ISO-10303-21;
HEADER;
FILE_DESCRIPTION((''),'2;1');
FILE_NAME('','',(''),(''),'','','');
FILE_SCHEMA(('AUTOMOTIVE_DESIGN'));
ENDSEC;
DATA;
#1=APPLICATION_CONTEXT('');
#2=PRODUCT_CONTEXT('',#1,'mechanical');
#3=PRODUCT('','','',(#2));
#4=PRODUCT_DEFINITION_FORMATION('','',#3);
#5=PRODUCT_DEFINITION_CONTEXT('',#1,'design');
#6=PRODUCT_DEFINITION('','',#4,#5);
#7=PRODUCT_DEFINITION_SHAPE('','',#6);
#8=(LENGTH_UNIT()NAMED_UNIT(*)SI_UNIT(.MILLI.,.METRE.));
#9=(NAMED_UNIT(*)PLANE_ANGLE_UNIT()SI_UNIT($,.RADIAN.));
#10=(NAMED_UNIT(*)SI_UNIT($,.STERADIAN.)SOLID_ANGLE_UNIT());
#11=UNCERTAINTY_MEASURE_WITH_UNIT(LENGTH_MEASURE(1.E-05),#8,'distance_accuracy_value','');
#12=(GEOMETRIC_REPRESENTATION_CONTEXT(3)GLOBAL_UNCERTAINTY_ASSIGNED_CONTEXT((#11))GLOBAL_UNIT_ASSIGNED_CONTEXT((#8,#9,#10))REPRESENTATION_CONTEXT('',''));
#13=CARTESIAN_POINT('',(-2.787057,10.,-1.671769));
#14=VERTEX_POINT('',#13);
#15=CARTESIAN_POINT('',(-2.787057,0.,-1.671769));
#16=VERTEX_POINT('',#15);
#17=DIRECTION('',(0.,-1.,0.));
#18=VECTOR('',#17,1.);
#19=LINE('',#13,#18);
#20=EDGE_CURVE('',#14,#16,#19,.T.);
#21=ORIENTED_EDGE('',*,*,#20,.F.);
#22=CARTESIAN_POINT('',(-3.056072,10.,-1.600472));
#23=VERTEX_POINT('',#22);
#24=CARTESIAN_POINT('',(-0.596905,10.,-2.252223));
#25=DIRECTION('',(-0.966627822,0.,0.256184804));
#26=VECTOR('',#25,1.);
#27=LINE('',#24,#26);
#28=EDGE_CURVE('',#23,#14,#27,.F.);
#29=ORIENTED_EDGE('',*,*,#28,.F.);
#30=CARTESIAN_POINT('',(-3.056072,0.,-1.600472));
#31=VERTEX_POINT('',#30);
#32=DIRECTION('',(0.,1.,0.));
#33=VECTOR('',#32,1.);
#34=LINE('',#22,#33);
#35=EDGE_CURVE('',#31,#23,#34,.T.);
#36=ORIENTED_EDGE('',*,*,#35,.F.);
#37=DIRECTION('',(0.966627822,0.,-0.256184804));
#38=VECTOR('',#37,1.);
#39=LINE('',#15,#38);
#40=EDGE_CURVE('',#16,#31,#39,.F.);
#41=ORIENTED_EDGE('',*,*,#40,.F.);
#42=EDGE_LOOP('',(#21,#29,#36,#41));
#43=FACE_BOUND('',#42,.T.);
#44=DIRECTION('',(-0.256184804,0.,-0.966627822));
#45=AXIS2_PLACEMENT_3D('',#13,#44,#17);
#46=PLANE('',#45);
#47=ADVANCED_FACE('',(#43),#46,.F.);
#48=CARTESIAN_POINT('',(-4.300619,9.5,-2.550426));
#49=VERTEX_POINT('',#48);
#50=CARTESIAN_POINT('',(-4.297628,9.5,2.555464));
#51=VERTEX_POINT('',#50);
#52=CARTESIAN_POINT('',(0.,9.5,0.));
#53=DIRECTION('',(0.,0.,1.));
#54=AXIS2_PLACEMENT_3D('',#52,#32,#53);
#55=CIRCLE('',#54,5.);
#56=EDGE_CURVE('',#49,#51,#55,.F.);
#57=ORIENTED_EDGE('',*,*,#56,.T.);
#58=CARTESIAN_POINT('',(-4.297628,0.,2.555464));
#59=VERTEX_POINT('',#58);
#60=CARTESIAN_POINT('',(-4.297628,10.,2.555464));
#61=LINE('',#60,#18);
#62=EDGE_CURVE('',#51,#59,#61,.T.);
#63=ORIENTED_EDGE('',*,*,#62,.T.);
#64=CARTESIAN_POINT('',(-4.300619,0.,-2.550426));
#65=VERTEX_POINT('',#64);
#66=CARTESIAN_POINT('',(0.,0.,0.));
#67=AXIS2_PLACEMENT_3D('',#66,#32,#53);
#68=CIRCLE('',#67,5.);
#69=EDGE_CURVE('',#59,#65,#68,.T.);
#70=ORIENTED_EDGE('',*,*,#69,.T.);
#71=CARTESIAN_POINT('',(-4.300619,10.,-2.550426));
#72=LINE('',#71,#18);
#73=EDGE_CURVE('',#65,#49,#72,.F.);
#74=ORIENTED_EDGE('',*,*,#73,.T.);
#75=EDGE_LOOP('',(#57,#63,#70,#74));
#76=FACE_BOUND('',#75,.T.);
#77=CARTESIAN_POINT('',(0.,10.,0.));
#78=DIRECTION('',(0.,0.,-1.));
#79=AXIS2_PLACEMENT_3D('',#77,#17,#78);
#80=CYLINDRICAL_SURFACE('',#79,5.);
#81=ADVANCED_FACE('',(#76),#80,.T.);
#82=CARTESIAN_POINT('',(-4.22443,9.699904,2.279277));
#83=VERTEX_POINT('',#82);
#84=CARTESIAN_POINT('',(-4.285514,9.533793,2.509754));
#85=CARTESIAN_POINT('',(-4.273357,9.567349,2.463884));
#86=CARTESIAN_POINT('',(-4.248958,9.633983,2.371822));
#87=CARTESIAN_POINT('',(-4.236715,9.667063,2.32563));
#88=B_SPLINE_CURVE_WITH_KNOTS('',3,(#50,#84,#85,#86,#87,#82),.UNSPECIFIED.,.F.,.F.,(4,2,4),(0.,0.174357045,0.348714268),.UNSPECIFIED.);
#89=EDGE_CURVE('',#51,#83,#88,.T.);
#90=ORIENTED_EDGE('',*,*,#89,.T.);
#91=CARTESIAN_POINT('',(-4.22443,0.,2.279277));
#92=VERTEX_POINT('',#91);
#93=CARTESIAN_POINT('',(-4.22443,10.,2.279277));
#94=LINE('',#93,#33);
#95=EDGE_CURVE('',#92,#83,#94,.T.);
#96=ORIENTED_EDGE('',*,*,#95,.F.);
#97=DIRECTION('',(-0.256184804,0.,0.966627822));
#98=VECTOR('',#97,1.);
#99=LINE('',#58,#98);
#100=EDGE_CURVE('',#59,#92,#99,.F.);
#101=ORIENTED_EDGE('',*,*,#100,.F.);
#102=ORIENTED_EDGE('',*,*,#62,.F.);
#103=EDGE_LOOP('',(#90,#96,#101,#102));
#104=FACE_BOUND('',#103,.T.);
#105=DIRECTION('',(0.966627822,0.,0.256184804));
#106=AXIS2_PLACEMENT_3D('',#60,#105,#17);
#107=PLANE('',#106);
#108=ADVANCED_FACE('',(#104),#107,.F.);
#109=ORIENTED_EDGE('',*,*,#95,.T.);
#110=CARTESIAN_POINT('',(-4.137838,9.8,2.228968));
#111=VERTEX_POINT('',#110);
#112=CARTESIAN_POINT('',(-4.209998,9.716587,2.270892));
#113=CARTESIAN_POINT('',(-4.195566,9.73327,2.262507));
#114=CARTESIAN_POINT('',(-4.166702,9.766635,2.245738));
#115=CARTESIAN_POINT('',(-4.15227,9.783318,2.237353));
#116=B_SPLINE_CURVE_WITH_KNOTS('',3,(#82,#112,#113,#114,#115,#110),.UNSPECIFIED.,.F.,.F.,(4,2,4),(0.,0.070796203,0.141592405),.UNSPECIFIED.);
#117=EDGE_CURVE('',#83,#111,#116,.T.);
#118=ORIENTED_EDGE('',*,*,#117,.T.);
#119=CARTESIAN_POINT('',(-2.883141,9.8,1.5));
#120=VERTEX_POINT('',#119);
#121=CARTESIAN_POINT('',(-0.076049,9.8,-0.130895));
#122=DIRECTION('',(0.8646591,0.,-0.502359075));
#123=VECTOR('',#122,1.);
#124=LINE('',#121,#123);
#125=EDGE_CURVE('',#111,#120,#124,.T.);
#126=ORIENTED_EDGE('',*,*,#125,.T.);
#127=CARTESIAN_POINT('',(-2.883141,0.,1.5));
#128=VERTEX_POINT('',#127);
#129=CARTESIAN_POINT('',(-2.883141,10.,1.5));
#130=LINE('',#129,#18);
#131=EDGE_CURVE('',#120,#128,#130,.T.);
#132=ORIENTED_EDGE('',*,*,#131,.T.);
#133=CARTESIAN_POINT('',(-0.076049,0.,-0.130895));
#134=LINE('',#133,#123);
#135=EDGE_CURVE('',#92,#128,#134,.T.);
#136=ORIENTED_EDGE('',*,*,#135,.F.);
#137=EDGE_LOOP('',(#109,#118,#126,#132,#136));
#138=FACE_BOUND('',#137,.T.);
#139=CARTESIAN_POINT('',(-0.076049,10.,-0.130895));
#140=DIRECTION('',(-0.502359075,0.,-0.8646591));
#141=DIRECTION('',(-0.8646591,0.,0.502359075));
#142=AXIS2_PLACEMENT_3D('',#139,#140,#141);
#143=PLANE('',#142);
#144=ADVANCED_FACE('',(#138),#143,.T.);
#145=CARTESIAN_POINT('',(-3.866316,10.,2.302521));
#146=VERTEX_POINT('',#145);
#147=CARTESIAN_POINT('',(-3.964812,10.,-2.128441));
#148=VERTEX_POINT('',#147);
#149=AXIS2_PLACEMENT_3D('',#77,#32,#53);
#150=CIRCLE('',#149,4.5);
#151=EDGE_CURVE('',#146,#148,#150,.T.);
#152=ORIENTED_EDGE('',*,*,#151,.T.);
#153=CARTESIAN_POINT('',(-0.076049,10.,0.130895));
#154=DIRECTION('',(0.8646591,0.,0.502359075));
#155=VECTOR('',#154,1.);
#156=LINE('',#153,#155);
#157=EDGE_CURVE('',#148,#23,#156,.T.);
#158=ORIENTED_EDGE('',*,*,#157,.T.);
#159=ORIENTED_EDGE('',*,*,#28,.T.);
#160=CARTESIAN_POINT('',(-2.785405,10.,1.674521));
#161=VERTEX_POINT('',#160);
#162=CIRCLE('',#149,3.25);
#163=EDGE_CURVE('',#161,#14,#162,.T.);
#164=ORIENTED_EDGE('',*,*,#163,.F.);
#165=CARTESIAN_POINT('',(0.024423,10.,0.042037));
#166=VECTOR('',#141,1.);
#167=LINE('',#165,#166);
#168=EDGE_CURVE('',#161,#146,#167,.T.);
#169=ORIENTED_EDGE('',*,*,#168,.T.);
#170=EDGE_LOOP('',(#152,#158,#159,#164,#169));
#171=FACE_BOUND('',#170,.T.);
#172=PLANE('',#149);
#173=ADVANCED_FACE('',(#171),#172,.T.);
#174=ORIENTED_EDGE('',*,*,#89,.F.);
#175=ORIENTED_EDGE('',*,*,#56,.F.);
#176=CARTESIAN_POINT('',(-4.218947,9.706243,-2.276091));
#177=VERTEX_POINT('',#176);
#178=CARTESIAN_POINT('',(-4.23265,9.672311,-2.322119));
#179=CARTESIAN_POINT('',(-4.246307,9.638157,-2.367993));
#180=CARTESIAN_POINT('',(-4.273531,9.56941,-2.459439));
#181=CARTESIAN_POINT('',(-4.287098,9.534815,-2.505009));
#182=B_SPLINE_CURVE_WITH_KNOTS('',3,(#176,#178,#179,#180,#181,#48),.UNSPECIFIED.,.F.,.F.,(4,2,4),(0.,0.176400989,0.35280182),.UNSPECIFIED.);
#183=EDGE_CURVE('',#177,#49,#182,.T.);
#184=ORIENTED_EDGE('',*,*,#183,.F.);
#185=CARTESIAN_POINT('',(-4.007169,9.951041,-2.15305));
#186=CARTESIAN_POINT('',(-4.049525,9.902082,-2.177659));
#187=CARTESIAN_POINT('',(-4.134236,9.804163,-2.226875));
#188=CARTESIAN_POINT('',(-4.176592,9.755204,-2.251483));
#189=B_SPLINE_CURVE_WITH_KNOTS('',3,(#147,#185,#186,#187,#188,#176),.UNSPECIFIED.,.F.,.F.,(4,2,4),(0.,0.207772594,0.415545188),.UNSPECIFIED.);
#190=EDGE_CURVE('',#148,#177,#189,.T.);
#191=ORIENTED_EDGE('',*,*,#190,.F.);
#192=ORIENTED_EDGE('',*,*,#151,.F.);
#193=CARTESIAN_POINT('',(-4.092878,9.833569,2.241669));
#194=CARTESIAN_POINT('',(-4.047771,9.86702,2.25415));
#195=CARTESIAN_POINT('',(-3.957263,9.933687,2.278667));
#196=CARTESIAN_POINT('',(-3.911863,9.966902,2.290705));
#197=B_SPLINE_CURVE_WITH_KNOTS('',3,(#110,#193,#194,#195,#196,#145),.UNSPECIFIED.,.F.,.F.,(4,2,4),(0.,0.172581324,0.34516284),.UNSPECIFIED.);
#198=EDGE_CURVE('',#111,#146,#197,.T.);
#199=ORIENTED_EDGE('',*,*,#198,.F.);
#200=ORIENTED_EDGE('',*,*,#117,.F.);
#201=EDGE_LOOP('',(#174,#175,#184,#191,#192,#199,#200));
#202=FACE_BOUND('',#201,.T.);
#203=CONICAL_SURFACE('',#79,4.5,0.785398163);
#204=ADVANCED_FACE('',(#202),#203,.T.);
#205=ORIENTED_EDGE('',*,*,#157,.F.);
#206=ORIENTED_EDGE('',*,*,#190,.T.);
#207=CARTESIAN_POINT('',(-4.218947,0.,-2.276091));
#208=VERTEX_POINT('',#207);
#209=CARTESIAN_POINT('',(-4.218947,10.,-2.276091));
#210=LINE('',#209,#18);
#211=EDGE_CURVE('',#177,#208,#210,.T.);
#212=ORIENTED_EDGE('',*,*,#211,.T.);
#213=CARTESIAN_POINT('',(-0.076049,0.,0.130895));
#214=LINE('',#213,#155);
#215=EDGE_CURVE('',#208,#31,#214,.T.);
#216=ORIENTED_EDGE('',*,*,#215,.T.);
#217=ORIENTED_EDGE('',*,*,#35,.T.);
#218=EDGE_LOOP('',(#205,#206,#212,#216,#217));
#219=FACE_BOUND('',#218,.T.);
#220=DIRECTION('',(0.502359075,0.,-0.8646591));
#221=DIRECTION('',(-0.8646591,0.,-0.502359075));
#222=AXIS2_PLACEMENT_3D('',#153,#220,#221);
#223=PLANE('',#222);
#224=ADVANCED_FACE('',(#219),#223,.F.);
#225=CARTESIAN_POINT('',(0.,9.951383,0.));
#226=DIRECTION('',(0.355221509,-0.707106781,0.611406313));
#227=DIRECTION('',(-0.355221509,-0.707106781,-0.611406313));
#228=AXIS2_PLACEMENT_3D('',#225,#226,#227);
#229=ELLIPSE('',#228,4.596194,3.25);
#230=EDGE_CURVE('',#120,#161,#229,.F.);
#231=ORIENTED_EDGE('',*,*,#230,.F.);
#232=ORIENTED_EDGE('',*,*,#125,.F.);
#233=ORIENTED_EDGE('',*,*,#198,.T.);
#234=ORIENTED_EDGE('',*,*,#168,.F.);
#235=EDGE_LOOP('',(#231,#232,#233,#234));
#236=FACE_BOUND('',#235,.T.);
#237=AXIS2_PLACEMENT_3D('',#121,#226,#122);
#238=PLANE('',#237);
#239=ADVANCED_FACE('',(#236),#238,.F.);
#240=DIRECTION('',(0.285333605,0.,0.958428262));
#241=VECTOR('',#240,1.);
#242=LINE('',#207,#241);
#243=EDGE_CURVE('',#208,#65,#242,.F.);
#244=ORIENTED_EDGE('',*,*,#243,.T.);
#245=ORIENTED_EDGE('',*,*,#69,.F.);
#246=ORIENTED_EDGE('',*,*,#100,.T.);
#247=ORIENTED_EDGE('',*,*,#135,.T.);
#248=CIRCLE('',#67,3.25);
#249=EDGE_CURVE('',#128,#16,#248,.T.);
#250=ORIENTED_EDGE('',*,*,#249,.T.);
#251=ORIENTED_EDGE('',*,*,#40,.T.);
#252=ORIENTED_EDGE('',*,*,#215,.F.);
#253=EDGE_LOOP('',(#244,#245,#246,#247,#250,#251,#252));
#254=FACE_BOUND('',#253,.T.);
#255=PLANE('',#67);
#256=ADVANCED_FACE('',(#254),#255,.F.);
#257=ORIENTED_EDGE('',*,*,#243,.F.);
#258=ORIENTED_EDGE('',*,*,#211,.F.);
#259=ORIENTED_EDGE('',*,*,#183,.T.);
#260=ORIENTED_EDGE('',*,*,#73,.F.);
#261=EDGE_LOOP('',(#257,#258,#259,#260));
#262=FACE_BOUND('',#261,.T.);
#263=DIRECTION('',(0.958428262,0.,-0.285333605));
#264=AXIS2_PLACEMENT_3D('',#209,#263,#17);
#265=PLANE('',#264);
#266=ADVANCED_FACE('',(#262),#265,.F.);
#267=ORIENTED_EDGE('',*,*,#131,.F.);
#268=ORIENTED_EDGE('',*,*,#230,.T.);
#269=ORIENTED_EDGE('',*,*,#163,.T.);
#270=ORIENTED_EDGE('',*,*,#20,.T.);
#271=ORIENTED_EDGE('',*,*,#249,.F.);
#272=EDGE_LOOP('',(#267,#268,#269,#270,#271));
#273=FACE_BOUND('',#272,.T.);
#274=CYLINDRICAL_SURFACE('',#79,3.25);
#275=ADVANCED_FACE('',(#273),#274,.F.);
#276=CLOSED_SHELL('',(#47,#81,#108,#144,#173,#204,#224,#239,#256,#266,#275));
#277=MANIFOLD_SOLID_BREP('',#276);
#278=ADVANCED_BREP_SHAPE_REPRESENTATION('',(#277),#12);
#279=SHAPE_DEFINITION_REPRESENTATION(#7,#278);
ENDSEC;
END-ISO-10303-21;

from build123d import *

# Parameters (mm, degrees)
BOSS_EXTRUDE1_DEPTH = 10
CHAMFER1_SIZE       = 0.2
CHAMFER1_SIZE_2     = 0.206341937
CHAMFER2_SIZE       = 0.5


with BuildPart() as part:
    # Sketch1 → Boss-Extrude1 (new body)
    with BuildSketch(Plane(origin=(0, 0, 0), x_dir=(1, 0, 0), z_dir=(0, 1, 0))):
        with BuildLine():
            ThreePointArc((5, 0), (1.227434059, 4.846999652), (-4.397362252, 2.379748983))
            Line((-4.397362252, 2.379748983), (-2.883140649, 1.5))
            ThreePointArc((-2.883140649, 1.5), (0.772105204, 3.156953207), (3.25, 0))
            ThreePointArc((3.25, 0), (0.772105204, -3.156953207), (-2.883140649, -1.5))
            Line((-2.883140649, -1.5), (-4.397362252, -2.379748983))
            ThreePointArc((-4.397362252, -2.379748983), (1.227434059, -4.846999652), (5, 0))
        make_face()
    extrude(amount=BOSS_EXTRUDE1_DEPTH)

    # Chamfer1
    # the kernel refuses this chamfer: 0.206341937, 0.2, 0.191297121 mm, written as the material it takes off along each edge
    with BuildSketch(Plane(origin=(-2.883140649, -0.514336598, -1.5), x_dir=(0.4881882615859918, 0, -0.8727383463843256), z_dir=(0, 1, 0))) as chamfer1_piece_1:
        with BuildLine():
            Line((0.196815803, 0), (CHAMFER1_SIZE * 0.0163116056584, CHAMFER1_SIZE * 0.99986695691))
            Line((CHAMFER1_SIZE * 0.0163116056584, CHAMFER1_SIZE * 0.99986695691), (0, 0))
            ThreePointArc((0, 0), (0.101193556, 0.001489012), (0.196815803, 0))
        make_face()
    extrude(amount=11.028673195, mode=Mode.SUBTRACT)
    with BuildSketch(Plane(origin=(-4.397362252, -0.531068819, -2.379748983), x_dir=(0.4931124519861111, 0, -0.8699655796042999), z_dir=(0, 1, 0))) as chamfer1_piece_2:
        with BuildLine():
            Line((0.196188757, 0), (-CHAMFER1_SIZE_2 * 0.010660935079, -CHAMFER1_SIZE_2 * 0.999943172174))
            Line((-CHAMFER1_SIZE_2 * 0.010660935079, -CHAMFER1_SIZE_2 * 0.999943172174), (0, 0))
            ThreePointArc((0, 0), (0.100953531, 0.000961526), (0.196188757, 0))
        make_face()
    extrude(amount=11.062137639, mode=Mode.SUBTRACT)
    with BuildSketch(Plane(origin=(-4.397362252, -0.520052168, 2.379748983), x_dir=(0.49362201920020077, 0, 0.8696765503109283), z_dir=(0, 1, 0))) as chamfer1_piece_3:
        with BuildLine():
            Line((0.202045895, 0), (-CHAMFER1_SIZE * 0.0100751366451, CHAMFER1_SIZE * 0.999949244523))
            Line((-CHAMFER1_SIZE * 0.0100751366451, CHAMFER1_SIZE * 0.999949244523), (0, 0))
            ThreePointArc((0, 0), (0.103969214, -0.0010198), (0.202045895, 0))
        make_face()
    extrude(amount=11.040104337, mode=Mode.SUBTRACT)
    # the kernel refuses this chamfer: 0.206341937, 0.2, 0.191297121 mm, written as the material it takes off along each edge
    with BuildSketch(Plane(origin=(-2.438414829, 10, 1.241618342), x_dir=(0.502359075260422, 0, 0.8646591001680913), z_dir=(-0.8646591001680916, 0, 0.5023590752604221))) as chamfer1_2_piece_1:
        Polygon((CHAMFER1_SIZE, 0), (0, -CHAMFER1_SIZE), (0, 0), align=None)
    extrude(amount=2.57990857, mode=Mode.SUBTRACT)

    # Chamfer2
    # the kernel refuses this chamfer: 0.5 mm, written as the material it takes off along each edge
    with BuildSketch(Plane(origin=(0, 10, 0), x_dir=(-0.9618869269385497, 0, -0.2734475082803154), z_dir=(-0.2734475082803154, 0, 0.9618869269385497))) as chamfer2_piece_1:
        Polygon((5, CHAMFER2_SIZE), (5 - CHAMFER2_SIZE, 0), (5, 0), align=None)
    revolve(axis=Axis((0, 10, 0), (0, -1, 0)), revolution_arc=328.193834559, mode=Mode.SUBTRACT)


solid = part.part
